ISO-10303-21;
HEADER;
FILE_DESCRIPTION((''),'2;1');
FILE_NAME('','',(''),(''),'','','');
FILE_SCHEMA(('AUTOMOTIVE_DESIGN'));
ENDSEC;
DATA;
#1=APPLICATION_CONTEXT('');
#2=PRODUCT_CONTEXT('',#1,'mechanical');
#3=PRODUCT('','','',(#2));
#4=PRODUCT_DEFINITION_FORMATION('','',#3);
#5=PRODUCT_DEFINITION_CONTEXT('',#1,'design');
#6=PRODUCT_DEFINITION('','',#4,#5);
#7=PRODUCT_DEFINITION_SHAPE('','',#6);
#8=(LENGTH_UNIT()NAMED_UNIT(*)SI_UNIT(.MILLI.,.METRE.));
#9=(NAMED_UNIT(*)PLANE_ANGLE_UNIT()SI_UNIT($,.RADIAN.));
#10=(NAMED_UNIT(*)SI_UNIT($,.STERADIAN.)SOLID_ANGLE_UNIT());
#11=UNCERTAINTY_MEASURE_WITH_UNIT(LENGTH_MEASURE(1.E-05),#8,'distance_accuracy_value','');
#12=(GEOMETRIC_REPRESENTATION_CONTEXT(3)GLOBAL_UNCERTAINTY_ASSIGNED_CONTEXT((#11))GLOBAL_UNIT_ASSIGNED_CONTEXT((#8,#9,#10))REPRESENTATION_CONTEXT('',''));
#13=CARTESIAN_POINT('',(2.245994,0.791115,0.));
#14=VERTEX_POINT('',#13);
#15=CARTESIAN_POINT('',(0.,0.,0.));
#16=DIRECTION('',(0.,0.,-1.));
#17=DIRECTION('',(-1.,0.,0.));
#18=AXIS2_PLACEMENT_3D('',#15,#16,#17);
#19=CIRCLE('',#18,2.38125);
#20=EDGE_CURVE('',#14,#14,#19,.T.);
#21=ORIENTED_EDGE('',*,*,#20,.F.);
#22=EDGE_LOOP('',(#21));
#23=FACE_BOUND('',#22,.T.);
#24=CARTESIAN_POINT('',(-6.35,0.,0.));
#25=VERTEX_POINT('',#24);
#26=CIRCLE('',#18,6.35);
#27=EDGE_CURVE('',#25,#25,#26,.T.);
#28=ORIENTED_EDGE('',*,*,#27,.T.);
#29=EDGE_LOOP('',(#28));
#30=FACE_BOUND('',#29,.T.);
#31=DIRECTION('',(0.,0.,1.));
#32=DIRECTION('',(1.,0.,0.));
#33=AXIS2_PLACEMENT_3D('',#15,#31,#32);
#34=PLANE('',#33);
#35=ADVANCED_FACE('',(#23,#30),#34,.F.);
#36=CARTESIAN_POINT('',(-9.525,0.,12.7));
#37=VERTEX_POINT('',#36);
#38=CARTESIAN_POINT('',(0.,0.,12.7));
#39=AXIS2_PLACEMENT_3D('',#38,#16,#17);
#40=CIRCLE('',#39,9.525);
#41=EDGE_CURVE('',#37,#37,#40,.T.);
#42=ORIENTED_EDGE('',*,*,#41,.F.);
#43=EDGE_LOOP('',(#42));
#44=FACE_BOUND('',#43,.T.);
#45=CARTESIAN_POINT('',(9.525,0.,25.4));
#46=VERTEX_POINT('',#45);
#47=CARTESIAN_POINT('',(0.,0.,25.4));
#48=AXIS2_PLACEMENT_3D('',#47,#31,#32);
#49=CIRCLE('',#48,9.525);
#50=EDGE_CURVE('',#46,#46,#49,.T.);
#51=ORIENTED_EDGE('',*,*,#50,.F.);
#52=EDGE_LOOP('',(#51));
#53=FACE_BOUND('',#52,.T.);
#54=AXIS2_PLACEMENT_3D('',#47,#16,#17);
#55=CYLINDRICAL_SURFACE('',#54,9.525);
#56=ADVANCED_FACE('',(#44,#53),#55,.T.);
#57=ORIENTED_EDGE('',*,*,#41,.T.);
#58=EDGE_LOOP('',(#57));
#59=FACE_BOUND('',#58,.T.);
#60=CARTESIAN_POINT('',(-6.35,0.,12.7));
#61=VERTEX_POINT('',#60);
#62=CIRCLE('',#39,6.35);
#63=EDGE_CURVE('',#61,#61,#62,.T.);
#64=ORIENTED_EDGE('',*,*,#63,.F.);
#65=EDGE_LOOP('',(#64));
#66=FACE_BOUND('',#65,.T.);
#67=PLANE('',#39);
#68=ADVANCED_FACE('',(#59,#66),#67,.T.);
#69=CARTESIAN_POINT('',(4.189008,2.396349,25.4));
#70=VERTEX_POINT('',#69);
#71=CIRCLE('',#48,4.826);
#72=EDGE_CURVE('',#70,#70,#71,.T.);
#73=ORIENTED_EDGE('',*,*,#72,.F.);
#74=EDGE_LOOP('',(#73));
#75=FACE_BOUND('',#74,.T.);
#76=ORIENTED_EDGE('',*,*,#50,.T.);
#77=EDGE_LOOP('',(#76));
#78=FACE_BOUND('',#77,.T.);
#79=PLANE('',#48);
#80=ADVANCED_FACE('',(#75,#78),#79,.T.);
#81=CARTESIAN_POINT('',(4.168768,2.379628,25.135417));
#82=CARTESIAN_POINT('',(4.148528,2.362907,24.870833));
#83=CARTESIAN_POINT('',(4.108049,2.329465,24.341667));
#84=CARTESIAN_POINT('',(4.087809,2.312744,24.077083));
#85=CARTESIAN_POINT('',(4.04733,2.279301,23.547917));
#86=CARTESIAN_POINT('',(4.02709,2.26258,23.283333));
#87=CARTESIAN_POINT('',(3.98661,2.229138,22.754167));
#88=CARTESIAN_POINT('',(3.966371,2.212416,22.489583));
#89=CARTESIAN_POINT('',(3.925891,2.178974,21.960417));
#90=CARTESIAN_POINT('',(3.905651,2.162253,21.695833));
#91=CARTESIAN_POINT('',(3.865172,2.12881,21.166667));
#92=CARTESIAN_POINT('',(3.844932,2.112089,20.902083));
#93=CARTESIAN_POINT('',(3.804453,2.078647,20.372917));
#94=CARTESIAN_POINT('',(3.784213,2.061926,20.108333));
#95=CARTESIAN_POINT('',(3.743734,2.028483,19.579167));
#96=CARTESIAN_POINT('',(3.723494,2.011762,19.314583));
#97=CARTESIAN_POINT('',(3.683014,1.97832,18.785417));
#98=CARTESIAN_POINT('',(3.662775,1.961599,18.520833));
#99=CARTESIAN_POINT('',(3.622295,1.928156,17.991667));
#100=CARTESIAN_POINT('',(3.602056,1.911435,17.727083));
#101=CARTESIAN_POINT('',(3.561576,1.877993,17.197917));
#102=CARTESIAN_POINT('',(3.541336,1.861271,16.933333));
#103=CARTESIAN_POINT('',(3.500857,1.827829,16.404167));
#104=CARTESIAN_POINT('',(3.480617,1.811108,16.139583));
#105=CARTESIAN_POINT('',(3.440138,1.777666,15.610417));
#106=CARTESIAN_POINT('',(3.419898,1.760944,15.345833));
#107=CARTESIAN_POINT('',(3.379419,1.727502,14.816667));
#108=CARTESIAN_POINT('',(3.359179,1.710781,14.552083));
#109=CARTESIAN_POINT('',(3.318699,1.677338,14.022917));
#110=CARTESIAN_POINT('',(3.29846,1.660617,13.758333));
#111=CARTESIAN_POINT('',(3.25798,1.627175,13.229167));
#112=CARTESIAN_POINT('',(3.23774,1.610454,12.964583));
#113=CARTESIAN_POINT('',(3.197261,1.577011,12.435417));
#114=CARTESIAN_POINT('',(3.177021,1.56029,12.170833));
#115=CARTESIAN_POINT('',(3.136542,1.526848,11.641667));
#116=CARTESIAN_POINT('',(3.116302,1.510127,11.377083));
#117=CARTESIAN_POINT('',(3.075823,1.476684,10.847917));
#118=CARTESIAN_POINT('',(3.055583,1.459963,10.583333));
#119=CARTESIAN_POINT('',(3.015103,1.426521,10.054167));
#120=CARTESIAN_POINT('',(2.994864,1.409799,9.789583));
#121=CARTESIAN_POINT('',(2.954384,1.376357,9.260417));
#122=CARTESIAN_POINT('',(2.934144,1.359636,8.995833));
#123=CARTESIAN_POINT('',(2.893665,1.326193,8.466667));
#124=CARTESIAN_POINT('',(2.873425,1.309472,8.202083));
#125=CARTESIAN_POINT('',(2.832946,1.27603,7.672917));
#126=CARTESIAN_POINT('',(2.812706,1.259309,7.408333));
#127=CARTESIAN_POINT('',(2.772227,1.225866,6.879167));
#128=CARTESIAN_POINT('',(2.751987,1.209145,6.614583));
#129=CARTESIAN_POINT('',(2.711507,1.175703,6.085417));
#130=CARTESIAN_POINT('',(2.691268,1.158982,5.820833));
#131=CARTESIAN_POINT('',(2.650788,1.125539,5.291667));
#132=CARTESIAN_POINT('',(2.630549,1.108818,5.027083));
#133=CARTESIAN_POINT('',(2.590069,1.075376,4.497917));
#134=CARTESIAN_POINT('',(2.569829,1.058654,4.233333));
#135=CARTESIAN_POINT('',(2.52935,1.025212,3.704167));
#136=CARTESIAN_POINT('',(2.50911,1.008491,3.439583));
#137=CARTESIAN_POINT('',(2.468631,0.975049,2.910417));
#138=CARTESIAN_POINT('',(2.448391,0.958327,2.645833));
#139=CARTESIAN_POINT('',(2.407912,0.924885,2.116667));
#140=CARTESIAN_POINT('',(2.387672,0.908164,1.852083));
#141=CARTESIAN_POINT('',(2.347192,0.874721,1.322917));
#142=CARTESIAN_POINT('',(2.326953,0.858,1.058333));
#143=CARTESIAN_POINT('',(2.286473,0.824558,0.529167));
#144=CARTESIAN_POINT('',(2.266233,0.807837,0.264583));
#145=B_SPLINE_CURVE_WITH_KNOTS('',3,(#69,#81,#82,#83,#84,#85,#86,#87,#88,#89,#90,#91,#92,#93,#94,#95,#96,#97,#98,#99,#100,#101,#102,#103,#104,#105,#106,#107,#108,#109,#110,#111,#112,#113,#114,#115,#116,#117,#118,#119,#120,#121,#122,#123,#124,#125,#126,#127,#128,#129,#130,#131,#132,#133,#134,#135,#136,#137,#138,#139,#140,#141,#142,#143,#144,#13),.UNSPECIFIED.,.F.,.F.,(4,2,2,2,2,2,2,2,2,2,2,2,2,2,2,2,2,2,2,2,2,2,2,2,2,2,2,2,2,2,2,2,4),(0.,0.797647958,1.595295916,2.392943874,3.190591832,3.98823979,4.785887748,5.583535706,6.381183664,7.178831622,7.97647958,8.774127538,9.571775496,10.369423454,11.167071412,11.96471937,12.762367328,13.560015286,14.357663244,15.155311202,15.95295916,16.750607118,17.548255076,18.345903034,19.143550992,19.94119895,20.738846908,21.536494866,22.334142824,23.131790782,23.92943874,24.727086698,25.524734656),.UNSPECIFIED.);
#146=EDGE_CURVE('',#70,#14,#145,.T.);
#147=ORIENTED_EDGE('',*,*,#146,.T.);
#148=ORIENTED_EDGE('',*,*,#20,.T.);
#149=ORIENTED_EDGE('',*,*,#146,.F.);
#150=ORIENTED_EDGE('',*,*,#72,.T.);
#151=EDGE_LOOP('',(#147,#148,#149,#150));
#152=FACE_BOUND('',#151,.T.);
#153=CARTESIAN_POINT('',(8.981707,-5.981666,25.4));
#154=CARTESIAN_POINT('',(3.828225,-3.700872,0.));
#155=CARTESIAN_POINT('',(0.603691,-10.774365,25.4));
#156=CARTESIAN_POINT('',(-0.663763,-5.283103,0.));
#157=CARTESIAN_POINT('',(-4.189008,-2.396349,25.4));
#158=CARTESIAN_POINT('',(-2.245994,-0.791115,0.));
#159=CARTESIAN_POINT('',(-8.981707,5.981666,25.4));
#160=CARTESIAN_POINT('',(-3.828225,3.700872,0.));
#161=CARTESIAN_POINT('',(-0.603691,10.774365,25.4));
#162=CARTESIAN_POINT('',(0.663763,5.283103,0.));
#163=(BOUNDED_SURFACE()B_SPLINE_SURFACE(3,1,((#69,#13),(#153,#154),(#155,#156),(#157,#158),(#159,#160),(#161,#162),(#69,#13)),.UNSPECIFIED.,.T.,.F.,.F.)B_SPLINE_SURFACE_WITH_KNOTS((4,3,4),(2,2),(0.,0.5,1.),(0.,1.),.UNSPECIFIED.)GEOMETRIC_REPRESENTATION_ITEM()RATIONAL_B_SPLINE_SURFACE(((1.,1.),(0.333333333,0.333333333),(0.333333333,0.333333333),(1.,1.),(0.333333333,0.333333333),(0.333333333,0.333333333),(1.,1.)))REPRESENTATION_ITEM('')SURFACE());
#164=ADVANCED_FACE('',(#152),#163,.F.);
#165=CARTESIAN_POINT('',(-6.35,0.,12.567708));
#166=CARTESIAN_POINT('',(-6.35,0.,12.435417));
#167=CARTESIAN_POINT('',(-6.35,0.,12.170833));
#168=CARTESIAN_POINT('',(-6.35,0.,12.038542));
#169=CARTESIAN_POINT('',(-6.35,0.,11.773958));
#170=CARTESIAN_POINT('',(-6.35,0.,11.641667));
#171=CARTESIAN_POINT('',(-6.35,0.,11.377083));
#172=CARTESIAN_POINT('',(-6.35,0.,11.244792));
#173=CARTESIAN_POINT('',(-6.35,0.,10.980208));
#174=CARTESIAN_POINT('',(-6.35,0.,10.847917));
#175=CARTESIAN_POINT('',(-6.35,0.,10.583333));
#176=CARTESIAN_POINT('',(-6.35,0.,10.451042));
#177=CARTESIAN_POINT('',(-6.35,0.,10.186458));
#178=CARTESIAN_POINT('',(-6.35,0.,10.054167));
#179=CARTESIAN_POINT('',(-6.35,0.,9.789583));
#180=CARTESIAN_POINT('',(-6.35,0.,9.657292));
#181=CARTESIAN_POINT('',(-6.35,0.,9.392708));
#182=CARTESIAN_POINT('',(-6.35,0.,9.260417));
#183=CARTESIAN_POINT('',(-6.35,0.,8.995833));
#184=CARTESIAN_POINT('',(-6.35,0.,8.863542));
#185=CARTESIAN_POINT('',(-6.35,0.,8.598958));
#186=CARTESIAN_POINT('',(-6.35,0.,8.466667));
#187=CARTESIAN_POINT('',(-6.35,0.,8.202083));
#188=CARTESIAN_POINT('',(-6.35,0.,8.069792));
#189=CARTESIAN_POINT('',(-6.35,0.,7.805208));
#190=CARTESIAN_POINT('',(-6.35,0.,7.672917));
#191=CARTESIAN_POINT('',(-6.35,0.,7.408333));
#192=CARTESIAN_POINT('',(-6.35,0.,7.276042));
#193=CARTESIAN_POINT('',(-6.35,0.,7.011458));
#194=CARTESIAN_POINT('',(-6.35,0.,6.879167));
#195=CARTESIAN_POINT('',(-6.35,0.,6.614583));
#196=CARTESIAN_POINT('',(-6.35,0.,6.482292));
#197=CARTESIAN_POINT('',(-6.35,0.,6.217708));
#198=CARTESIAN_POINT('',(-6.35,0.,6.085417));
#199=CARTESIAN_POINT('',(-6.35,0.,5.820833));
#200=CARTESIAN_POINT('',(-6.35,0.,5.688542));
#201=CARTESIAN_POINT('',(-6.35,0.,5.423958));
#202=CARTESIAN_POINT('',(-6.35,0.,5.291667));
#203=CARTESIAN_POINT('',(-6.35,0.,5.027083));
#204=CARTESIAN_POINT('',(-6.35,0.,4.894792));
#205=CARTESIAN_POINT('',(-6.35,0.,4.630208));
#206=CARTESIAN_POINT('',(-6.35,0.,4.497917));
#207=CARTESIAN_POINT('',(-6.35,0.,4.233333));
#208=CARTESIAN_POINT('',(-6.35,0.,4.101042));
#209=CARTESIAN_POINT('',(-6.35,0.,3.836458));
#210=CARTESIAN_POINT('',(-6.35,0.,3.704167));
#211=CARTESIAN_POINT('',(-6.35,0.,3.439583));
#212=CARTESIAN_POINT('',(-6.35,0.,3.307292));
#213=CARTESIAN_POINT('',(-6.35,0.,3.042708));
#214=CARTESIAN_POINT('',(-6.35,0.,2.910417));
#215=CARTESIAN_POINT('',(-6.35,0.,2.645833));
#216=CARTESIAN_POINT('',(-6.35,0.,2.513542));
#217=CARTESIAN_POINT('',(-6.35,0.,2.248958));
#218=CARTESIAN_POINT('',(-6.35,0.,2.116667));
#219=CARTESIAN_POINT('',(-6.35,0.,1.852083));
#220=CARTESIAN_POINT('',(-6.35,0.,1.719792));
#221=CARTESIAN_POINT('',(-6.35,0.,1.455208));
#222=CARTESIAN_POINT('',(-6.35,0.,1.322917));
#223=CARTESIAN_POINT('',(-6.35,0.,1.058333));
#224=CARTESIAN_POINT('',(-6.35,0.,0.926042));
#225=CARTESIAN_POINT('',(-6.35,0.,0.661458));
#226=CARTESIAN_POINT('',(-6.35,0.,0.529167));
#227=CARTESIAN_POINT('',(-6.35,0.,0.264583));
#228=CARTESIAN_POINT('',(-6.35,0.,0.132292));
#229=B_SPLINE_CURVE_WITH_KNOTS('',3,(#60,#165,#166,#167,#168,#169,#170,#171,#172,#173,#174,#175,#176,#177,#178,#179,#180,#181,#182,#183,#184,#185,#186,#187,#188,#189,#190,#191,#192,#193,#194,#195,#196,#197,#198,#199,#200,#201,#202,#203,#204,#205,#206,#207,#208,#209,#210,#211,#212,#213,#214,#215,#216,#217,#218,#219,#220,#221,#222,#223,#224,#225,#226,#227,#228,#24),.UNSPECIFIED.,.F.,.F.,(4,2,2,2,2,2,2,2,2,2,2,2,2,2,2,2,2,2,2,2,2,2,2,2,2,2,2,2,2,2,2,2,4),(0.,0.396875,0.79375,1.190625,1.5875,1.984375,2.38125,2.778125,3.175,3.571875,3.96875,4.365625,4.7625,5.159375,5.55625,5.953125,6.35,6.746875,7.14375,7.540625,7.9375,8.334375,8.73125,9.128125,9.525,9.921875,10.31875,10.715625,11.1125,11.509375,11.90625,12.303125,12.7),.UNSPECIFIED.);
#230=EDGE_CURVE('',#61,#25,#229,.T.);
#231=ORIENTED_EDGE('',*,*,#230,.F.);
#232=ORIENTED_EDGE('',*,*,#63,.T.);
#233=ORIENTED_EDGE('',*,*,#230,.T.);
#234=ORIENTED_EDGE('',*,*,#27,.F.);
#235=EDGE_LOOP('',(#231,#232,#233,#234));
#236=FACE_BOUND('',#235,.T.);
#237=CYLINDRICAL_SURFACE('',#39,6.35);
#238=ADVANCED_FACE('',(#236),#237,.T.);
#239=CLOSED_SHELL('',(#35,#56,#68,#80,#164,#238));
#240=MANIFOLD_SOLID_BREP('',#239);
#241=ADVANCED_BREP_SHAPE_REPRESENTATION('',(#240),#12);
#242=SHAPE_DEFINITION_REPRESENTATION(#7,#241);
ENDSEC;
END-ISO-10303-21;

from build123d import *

# Parameters (mm, degrees)
SKETCH1_R           = 9.525
BOSS_EXTRUDE1_DEPTH = 25.4
SKETCH4_R           = 9.525
SKETCH4_R_2         = 6.35
CUT_EXTRUDE1_DEPTH  = 12.7


with BuildPart() as part:
    # Sketch1 → Boss-Extrude1 (new body)
    with BuildSketch(Plane.XY):
        Circle(SKETCH1_R)
    extrude(amount=BOSS_EXTRUDE1_DEPTH)

    # Cut-Loft1: read off the stored shape, not the designer's step
    # Cut-Loft1: loft between two sections, ruled curve by curve
    cut_loft1_from = [
        Edge.make_bspline([(4.189007655, 2.396349487, 25.4), (8.981706629, -5.981665824, 25.4), (0.603691318, -10.774364798, 25.4), (-4.189007655, -2.396349487, 25.4), (-8.981706629, 5.981665824, 25.4), (-0.603691318, 10.774364798, 25.4), (4.189007655, 2.396349487, 25.4)], [0, 0, 0, 0, 0.5, 0.5, 0.5, 1, 1, 1, 1], 3, [1, 0.333333333, 0.333333333, 1, 0.333333333, 0.333333333, 1]),
    ]
    cut_loft1_to = [
        Edge.make_bspline([(2.245993729, 0.791115497, 0), (3.828224724, -3.700871962, 0), (-0.663762735, -5.283102956, 0), (-2.245993729, -0.791115497, 0), (-3.828224724, 3.700871962, 0), (0.663762735, 5.283102956, 0), (2.245993729, 0.791115497, 0)], [0, 0, 0, 0, 0.5, 0.5, 0.5, 1, 1, 1, 1], 3, [1, 0.333333333, 0.333333333, 1, 0.333333333, 0.333333333, 1]),
    ]
    cut_loft1 = Solid(Shell([*[Face.make_surface_from_curves(cut_loft1_from[k], cut_loft1_to[k]) for k in range(1)], Face(Wire(cut_loft1_from)), Face(Wire(cut_loft1_to))]))
    add(cut_loft1, mode=Mode.SUBTRACT)

    # Sketch4 → Cut-Extrude1 (cut)
    with BuildSketch(Plane(origin=(0, 0, 0), x_dir=(-1, 0, 0), z_dir=(0, 0, -1))):
        Circle(SKETCH4_R)
        Circle(SKETCH4_R_2, mode=Mode.SUBTRACT)
    extrude(amount=-CUT_EXTRUDE1_DEPTH, mode=Mode.SUBTRACT)


solid = part.part
